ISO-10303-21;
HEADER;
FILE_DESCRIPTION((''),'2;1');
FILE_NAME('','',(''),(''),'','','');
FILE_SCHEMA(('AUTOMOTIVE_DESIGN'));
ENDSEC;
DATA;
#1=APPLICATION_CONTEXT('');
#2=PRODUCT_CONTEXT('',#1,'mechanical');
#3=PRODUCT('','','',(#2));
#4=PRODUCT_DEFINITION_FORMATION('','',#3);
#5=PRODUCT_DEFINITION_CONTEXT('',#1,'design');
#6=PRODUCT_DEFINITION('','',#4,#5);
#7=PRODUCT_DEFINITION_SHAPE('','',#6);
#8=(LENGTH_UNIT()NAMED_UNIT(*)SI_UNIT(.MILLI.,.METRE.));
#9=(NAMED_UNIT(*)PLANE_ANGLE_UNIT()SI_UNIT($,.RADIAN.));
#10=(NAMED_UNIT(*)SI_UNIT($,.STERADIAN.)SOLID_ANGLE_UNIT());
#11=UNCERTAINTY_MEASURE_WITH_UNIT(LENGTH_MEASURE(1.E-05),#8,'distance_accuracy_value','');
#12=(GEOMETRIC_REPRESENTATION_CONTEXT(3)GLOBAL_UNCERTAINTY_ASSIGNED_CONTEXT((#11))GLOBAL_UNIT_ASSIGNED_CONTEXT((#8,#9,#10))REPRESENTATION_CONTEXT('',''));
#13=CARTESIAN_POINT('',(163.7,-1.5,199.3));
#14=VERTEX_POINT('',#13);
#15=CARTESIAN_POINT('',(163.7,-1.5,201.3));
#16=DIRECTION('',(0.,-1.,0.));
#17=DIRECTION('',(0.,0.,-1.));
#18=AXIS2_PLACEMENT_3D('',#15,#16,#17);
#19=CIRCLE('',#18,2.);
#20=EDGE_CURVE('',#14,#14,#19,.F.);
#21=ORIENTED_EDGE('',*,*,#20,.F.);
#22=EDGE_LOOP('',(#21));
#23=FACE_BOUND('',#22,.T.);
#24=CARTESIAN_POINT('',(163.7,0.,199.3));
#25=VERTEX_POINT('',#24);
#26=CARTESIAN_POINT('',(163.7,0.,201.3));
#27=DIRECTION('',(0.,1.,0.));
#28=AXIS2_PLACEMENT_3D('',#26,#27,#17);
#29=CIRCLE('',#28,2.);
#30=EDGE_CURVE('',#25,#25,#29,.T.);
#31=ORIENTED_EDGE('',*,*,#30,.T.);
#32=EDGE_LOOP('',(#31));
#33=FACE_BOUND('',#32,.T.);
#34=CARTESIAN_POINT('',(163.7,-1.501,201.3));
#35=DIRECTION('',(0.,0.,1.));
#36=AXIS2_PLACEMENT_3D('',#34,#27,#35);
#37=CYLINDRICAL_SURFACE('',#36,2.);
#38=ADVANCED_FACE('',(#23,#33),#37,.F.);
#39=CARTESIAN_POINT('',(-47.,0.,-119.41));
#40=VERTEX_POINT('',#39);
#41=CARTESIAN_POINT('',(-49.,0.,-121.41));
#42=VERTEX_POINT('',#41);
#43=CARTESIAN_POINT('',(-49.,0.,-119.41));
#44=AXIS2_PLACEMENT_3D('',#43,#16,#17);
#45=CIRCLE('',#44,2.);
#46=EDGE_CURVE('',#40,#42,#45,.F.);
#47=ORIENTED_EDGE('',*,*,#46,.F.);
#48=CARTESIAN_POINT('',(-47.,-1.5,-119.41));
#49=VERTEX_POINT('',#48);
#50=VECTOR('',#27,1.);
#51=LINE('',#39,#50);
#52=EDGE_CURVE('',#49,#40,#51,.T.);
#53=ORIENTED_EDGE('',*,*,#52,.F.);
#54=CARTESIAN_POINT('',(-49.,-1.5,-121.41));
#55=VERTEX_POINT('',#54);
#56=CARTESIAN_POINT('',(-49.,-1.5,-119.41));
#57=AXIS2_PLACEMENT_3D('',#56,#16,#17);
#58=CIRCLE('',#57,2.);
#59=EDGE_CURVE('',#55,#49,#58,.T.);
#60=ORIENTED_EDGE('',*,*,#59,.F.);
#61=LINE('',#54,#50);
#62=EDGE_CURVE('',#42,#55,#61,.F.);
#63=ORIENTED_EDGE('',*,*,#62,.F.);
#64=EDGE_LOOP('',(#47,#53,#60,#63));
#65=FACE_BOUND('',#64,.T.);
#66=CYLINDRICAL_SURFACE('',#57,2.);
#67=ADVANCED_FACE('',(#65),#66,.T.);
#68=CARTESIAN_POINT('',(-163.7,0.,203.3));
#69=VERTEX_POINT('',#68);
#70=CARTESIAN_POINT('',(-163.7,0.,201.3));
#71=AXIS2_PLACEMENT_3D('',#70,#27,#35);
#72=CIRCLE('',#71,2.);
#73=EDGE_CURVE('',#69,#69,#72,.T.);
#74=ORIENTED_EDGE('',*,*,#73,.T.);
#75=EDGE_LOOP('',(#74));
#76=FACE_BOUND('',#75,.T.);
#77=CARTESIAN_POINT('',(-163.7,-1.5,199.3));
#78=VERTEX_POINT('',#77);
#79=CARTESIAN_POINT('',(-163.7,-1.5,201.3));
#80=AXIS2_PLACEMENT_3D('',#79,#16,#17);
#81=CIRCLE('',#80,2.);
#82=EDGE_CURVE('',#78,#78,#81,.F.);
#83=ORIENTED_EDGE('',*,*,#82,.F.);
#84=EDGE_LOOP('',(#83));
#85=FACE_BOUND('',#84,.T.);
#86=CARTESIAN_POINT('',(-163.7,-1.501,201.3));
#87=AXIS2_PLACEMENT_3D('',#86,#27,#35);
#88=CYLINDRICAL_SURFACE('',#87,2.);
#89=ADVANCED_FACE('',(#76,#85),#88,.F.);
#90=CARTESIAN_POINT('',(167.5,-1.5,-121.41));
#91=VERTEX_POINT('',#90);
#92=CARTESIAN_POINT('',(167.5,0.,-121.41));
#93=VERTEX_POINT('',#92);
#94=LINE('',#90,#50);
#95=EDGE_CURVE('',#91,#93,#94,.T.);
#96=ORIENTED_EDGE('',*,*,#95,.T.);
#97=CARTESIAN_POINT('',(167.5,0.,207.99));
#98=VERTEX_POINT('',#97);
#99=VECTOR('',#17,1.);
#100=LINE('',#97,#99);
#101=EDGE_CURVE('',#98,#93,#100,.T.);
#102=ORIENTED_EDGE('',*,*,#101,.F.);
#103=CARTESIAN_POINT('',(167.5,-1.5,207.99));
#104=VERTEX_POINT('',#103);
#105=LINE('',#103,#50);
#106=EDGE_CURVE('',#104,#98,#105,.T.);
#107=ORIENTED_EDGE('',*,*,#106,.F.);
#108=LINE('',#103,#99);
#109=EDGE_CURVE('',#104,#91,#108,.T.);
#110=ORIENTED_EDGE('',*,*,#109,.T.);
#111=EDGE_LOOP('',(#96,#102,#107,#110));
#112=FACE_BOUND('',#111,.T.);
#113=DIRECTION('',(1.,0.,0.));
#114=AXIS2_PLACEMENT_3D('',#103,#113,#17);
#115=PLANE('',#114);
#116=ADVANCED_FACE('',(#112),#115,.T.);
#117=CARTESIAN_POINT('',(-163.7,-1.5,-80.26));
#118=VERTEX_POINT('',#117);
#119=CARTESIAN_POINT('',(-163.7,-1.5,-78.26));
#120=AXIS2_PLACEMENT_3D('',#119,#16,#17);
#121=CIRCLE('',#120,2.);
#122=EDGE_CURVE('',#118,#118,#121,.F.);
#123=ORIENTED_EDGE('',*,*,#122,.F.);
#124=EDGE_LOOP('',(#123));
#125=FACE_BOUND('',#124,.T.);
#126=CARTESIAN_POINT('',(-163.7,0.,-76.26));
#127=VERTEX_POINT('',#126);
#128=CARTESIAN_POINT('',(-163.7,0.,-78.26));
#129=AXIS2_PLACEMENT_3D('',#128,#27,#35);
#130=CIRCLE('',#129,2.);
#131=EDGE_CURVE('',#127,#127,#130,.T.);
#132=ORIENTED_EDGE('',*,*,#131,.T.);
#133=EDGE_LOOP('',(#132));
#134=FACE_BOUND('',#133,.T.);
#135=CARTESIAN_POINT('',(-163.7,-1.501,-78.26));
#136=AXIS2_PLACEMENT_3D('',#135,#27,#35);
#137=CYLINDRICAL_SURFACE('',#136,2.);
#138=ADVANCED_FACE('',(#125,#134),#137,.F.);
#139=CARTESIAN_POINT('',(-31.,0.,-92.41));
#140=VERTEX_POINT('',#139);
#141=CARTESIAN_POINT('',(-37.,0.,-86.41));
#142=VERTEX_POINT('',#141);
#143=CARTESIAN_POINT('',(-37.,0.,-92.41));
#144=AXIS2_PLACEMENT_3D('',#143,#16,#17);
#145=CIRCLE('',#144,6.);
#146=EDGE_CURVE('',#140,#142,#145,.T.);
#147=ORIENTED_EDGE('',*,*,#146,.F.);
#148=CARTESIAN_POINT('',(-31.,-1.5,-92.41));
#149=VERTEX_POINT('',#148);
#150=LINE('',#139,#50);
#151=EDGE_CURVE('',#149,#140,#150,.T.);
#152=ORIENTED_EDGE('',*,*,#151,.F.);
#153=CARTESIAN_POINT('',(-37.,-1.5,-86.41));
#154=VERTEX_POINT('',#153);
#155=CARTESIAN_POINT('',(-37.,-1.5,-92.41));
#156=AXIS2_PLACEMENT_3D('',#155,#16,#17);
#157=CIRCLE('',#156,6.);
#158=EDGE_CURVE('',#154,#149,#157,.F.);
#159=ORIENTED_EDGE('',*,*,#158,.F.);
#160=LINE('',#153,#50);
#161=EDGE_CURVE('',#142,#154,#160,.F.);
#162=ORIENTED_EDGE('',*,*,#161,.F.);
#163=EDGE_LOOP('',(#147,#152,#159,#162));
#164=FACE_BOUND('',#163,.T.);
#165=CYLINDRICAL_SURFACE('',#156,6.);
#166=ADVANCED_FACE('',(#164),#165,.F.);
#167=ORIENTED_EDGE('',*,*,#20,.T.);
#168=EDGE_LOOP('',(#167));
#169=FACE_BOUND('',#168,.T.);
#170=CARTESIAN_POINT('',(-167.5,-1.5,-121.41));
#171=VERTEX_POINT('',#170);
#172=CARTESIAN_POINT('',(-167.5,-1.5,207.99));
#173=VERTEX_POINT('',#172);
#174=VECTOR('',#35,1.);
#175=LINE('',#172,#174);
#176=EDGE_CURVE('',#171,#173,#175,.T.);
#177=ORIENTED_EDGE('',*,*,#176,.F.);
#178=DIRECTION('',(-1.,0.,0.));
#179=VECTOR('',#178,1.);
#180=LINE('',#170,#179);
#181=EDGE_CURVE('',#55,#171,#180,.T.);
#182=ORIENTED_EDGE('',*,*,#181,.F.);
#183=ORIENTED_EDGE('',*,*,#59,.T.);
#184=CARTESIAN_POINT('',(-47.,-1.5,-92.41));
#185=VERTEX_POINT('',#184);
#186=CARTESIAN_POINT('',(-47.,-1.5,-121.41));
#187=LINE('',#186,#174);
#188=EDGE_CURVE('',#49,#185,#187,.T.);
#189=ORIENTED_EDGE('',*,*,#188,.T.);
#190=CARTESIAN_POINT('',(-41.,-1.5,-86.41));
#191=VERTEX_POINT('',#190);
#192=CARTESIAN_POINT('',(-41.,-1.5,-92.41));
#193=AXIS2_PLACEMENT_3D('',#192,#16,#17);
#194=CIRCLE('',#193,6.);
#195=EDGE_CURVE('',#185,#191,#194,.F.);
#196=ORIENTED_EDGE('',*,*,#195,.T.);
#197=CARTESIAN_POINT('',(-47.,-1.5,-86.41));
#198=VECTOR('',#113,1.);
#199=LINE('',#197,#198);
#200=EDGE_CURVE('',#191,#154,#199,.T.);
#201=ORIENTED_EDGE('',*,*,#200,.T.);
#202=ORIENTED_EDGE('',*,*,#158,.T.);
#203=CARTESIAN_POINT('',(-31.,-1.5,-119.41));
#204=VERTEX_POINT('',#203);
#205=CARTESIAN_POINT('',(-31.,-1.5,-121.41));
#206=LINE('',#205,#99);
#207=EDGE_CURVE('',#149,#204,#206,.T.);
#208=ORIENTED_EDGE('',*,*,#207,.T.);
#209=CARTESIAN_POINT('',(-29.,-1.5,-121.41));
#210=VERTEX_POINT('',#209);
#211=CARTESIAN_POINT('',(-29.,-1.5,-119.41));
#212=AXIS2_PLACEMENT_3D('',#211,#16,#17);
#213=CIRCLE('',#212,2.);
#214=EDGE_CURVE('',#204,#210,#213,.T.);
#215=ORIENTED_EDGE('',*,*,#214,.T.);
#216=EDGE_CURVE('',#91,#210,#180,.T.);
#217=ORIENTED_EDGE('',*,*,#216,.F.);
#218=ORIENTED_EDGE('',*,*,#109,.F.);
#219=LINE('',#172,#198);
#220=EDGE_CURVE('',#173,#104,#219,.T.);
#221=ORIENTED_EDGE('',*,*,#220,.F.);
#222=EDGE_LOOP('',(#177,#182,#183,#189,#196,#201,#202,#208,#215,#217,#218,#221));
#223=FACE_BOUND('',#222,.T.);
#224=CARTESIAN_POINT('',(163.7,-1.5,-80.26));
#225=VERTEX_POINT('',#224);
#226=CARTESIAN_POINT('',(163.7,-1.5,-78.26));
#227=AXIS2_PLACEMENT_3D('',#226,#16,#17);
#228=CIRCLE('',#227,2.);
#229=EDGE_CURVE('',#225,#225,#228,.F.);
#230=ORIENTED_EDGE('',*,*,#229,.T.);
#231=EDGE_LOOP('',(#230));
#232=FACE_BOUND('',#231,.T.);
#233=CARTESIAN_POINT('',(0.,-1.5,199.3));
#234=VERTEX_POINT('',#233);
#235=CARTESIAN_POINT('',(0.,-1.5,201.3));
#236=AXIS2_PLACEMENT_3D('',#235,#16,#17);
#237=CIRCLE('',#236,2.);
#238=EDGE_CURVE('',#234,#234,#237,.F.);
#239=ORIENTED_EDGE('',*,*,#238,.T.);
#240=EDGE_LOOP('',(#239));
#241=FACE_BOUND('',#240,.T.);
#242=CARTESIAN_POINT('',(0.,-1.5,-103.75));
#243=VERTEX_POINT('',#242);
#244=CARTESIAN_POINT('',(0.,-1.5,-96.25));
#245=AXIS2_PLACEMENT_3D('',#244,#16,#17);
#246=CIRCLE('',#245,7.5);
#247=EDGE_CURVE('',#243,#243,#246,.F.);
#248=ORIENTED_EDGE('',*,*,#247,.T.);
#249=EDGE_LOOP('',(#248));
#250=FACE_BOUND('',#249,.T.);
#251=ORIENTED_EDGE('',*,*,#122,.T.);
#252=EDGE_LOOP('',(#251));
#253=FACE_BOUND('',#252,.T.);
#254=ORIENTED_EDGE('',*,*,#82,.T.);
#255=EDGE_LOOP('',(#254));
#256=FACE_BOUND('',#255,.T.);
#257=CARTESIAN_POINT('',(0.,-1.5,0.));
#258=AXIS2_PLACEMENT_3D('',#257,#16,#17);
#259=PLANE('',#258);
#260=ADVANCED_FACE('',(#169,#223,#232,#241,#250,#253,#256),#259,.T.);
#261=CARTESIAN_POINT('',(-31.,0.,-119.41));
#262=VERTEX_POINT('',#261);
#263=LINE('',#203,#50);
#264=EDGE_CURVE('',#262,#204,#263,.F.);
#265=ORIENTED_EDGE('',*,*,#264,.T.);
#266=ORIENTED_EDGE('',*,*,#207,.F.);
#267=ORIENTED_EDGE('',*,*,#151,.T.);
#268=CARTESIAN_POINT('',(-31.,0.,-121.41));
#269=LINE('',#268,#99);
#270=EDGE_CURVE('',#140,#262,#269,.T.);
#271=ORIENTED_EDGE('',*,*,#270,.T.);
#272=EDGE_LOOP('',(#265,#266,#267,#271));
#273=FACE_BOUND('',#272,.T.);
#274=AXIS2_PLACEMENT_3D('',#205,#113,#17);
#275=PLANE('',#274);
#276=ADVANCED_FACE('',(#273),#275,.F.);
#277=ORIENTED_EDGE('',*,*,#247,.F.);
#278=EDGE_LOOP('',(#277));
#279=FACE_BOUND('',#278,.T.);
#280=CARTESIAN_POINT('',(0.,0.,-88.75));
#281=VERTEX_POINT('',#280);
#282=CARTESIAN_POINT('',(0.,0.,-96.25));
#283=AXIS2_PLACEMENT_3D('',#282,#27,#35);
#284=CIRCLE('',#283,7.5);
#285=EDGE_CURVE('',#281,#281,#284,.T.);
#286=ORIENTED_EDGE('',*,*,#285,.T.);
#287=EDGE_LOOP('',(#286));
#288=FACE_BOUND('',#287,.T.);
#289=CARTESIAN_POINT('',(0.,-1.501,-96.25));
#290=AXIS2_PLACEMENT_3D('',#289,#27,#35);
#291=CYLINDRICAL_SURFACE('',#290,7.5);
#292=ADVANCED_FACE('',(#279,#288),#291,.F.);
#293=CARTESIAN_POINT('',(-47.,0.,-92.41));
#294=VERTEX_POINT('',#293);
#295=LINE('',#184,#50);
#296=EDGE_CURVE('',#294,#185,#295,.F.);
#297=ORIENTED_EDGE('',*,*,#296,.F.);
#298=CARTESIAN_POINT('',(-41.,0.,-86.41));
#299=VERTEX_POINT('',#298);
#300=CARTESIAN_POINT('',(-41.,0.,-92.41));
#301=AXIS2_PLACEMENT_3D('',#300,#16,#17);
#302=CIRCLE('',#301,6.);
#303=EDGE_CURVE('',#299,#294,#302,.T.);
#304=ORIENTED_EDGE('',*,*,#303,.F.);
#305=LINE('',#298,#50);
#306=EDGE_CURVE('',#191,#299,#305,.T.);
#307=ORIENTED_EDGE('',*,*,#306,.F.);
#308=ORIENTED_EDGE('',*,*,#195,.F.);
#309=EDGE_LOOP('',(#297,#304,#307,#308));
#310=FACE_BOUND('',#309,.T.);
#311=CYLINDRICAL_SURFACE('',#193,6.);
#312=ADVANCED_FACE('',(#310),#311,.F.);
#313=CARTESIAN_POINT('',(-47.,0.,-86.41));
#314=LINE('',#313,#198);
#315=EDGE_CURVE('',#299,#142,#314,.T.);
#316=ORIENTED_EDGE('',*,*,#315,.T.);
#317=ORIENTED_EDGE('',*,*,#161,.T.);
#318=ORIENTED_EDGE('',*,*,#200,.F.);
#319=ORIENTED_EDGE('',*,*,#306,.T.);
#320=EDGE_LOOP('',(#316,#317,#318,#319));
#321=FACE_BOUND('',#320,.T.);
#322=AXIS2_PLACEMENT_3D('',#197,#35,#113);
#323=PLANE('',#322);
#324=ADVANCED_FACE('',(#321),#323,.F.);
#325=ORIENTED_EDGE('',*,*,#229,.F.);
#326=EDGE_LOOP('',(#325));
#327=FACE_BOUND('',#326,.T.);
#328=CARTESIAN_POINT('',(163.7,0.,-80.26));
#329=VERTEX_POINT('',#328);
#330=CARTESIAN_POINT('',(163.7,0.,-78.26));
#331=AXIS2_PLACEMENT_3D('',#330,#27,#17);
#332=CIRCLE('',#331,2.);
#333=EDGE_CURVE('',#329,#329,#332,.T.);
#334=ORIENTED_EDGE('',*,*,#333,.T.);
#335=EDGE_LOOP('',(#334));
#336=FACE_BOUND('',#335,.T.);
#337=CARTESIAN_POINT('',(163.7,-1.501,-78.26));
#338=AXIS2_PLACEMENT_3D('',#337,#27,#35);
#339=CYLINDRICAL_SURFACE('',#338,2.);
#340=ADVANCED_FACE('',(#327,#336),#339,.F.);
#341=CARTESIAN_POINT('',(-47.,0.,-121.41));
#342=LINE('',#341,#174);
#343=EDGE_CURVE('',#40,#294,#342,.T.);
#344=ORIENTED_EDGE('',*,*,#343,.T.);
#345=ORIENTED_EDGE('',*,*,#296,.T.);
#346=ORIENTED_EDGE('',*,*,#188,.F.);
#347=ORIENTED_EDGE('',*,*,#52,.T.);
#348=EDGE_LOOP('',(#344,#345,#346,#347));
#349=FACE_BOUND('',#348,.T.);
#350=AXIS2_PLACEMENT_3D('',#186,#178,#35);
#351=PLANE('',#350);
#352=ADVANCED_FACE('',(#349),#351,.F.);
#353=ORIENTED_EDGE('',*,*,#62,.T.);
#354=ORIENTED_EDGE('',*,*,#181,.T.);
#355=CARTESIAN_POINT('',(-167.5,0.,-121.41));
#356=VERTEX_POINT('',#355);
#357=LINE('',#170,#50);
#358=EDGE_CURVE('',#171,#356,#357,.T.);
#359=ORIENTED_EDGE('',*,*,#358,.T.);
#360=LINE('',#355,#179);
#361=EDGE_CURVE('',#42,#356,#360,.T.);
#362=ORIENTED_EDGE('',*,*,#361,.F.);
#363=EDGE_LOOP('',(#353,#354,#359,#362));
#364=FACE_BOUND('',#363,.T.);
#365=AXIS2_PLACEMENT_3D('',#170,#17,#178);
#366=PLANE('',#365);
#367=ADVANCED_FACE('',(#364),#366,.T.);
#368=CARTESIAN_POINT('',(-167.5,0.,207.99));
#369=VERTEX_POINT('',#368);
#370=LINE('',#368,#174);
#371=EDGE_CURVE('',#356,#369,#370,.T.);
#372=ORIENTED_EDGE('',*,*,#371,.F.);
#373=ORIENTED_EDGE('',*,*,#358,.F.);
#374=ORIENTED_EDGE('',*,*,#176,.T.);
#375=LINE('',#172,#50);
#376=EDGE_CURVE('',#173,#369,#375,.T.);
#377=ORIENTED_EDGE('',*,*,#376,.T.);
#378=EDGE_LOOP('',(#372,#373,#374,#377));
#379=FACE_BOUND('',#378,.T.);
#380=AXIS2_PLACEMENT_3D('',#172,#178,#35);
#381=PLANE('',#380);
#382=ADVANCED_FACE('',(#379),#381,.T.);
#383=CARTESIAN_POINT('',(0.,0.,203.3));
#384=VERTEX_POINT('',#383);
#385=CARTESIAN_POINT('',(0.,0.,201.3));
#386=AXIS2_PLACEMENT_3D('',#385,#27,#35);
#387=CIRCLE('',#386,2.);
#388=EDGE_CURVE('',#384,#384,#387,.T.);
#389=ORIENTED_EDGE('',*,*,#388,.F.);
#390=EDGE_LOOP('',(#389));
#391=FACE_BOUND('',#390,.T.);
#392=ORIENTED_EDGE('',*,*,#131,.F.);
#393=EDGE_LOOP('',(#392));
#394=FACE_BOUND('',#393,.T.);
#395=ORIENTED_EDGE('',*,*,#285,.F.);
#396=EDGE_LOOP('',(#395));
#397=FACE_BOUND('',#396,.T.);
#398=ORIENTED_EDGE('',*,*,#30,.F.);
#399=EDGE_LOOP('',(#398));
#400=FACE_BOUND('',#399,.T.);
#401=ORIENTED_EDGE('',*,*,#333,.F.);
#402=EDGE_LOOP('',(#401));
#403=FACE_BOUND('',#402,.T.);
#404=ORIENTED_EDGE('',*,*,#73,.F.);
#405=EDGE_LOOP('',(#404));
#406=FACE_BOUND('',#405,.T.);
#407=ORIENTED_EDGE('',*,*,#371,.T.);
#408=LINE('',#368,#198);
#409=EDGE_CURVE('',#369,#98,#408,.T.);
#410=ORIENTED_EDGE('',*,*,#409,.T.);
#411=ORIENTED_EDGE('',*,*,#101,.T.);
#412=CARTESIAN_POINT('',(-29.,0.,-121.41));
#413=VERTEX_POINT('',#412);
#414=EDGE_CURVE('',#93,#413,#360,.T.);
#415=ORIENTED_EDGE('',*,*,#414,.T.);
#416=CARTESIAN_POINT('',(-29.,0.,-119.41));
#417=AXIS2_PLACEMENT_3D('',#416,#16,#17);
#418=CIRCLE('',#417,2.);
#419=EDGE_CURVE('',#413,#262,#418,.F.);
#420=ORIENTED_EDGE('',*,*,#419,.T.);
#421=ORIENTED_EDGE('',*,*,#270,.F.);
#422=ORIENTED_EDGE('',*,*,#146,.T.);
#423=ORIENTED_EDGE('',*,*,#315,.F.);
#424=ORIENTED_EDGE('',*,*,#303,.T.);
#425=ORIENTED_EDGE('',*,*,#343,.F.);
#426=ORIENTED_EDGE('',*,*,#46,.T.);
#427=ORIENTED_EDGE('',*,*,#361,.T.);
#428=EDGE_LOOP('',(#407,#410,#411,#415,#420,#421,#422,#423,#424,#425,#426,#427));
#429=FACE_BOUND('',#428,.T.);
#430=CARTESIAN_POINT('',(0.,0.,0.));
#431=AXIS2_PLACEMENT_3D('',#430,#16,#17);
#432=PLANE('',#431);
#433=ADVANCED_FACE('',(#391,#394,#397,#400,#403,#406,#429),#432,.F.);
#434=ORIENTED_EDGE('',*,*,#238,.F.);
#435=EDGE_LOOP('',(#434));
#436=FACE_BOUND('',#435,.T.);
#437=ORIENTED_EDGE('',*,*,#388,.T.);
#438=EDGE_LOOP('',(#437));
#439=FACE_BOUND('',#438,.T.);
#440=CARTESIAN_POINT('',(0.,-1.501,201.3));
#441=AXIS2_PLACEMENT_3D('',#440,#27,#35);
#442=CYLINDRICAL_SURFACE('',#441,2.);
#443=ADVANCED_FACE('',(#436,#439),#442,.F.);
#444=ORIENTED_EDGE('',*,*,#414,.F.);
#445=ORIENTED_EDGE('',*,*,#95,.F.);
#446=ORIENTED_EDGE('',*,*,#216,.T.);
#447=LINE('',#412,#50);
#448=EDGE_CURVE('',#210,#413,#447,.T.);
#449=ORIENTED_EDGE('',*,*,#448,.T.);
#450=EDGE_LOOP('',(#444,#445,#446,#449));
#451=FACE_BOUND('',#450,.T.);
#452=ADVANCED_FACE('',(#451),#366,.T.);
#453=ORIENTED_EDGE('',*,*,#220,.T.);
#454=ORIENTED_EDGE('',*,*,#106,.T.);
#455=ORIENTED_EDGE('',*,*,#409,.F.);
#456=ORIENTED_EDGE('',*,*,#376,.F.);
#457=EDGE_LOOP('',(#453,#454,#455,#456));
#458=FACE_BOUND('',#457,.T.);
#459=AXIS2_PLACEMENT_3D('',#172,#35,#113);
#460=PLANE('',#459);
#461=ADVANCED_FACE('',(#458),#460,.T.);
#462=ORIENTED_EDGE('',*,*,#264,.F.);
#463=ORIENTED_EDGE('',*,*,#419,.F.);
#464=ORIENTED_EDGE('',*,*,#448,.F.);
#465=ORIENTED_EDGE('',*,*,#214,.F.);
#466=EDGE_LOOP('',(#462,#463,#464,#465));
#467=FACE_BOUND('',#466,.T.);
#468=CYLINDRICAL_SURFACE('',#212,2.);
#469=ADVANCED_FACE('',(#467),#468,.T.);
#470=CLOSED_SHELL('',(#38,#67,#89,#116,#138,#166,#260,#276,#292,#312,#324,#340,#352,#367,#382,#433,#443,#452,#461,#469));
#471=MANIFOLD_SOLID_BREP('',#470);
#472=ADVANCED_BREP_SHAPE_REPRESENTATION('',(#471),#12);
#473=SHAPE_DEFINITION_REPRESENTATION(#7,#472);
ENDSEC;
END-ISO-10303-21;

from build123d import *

# Parameters (mm, degrees)
CROQUIS12_W           = 335
CROQUIS12_H           = 329.4
BRIDA_BASE2_DEPTH     = 1.5
CORTAR_EXTRUIR6_REACH = 269.055
CROQUIS27_R           = 2
CORTAR_EXTRUIR7_REACH = 269.055
CROQUIS28_R           = 7.5
CROQUIS29_W           = 16
CROQUIS29_H           = 35
CORTAR_EXTRUIR8_DEPTH = 268.054938355
REDONDEO1_R           = 6
REDONDEO2_R           = 2


# Sheet-metal steps are written as plain solids
with BuildPart() as part:
    # Croquis12 → Brida base2 (new body)
    with BuildSketch(Plane(origin=(0, 0, 0), x_dir=(1, 0, 0), z_dir=(0, 1, 0))):
        with Locations((0, -43.29)):
            Rectangle(CROQUIS12_W, CROQUIS12_H)
    extrude(amount=-BRIDA_BASE2_DEPTH)

    # Croquis27 → Cortar-Extruir6 (cut, up to next)
    with BuildSketch(Plane(origin=(0, 0, 0), x_dir=(1, 0, 0), z_dir=(0, 1, 0)), mode=Mode.PRIVATE) as cortar_extruir6_sk1:
        with Locations(Location((-163.7, -201.3, 0), (0, 0, 270))):
            Circle(CROQUIS27_R)
    cortar_extruir6_tool1 = extrude(cortar_extruir6_sk1.sketch, amount=-CORTAR_EXTRUIR6_REACH, mode=Mode.PRIVATE) & part.part
    # Croquis27 → Cortar-Extruir6 (cut, up to next)
    with BuildSketch(Plane(origin=(0, 0, 0), x_dir=(1, 0, 0), z_dir=(0, 1, 0)), mode=Mode.PRIVATE) as cortar_extruir6_sk2:
        with Locations(Location((-163.7, 78.26, 0), (0, 0, 270))):
            Circle(CROQUIS27_R)
    cortar_extruir6_tool2 = extrude(cortar_extruir6_sk2.sketch, amount=-CORTAR_EXTRUIR6_REACH, mode=Mode.PRIVATE) & part.part
    # Croquis27 → Cortar-Extruir6 (cut, up to next)
    with BuildSketch(Plane(origin=(0, 0, 0), x_dir=(1, 0, 0), z_dir=(0, 1, 0)), mode=Mode.PRIVATE) as cortar_extruir6_sk3:
        with Locations(Location((163.7, 78.26, 0), (0, 0, 90))):
            Circle(CROQUIS27_R)
    cortar_extruir6_tool3 = extrude(cortar_extruir6_sk3.sketch, amount=-CORTAR_EXTRUIR6_REACH, mode=Mode.PRIVATE) & part.part
    # Croquis27 → Cortar-Extruir6 (cut, up to next)
    with BuildSketch(Plane(origin=(0, 0, 0), x_dir=(1, 0, 0), z_dir=(0, 1, 0)), mode=Mode.PRIVATE) as cortar_extruir6_sk4:
        with Locations(Location((163.7, -201.3, 0), (0, 0, 90))):
            Circle(CROQUIS27_R)
    cortar_extruir6_tool4 = extrude(cortar_extruir6_sk4.sketch, amount=-CORTAR_EXTRUIR6_REACH, mode=Mode.PRIVATE) & part.part
    # Croquis27 → Cortar-Extruir6 (cut, up to next)
    with BuildSketch(Plane(origin=(0, 0, 0), x_dir=(1, 0, 0), z_dir=(0, 1, 0)), mode=Mode.PRIVATE) as cortar_extruir6_sk5:
        with Locations(Location((0, -201.3, 0), (0, 0, 270))):
            Circle(CROQUIS27_R)
    cortar_extruir6_tool5 = extrude(cortar_extruir6_sk5.sketch, amount=-CORTAR_EXTRUIR6_REACH, mode=Mode.PRIVATE) & part.part
    add(cortar_extruir6_tool1.solids().sort_by_distance((-163.7, 0, 201.3))[0], mode=Mode.SUBTRACT)
    add(cortar_extruir6_tool2.solids().sort_by_distance((-163.7, 0, -78.26))[0], mode=Mode.SUBTRACT)
    add(cortar_extruir6_tool3.solids().sort_by_distance((163.7, 0, -78.26))[0], mode=Mode.SUBTRACT)
    add(cortar_extruir6_tool4.solids().sort_by_distance((163.7, 0, 201.3))[0], mode=Mode.SUBTRACT)
    add(cortar_extruir6_tool5.solids().sort_by_distance((0, 0, 201.3))[0], mode=Mode.SUBTRACT)

    # Croquis28 → Cortar-Extruir7 (cut, up to next)
    with BuildSketch(Plane(origin=(0, 0, 0), x_dir=(1, 0, 0), z_dir=(0, 1, 0)), mode=Mode.PRIVATE) as cortar_extruir7_sk1:
        with Locations(Location((0, 96.25, 0), (0, 0, 270))):
            Circle(CROQUIS28_R)
    cortar_extruir7_tool1 = extrude(cortar_extruir7_sk1.sketch, amount=-CORTAR_EXTRUIR7_REACH, mode=Mode.PRIVATE) & part.part
    add(cortar_extruir7_tool1.solids().sort_by_distance((0, 0, -96.25))[0], mode=Mode.SUBTRACT)

    # Croquis29 → Cortar-Extruir8 (cut, through all)
    with BuildSketch(Plane(origin=(0, 0, 0), x_dir=(1, 0, 0), z_dir=(0, 1, 0))):
        with Locations((-39, 103.91)):
            Rectangle(CROQUIS29_W, CROQUIS29_H)
    extrude(amount=-CORTAR_EXTRUIR8_DEPTH, mode=Mode.SUBTRACT)

    # Redondeo1
    redondeo1_edges = [part.edges().sort_by_distance(p)[0] for p in [
        (-47, -0.75, -86.41),
        (-31, -0.75, -86.41),
    ]]
    fillet(redondeo1_edges, radius=REDONDEO1_R)

    # Redondeo2
    redondeo2_edges = [part.edges().sort_by_distance(p)[0] for p in [
        (-47, -0.75, -121.41),
        (-31, -0.75, -121.41),
    ]]
    fillet(redondeo2_edges, radius=REDONDEO2_R)


solid = part.part
